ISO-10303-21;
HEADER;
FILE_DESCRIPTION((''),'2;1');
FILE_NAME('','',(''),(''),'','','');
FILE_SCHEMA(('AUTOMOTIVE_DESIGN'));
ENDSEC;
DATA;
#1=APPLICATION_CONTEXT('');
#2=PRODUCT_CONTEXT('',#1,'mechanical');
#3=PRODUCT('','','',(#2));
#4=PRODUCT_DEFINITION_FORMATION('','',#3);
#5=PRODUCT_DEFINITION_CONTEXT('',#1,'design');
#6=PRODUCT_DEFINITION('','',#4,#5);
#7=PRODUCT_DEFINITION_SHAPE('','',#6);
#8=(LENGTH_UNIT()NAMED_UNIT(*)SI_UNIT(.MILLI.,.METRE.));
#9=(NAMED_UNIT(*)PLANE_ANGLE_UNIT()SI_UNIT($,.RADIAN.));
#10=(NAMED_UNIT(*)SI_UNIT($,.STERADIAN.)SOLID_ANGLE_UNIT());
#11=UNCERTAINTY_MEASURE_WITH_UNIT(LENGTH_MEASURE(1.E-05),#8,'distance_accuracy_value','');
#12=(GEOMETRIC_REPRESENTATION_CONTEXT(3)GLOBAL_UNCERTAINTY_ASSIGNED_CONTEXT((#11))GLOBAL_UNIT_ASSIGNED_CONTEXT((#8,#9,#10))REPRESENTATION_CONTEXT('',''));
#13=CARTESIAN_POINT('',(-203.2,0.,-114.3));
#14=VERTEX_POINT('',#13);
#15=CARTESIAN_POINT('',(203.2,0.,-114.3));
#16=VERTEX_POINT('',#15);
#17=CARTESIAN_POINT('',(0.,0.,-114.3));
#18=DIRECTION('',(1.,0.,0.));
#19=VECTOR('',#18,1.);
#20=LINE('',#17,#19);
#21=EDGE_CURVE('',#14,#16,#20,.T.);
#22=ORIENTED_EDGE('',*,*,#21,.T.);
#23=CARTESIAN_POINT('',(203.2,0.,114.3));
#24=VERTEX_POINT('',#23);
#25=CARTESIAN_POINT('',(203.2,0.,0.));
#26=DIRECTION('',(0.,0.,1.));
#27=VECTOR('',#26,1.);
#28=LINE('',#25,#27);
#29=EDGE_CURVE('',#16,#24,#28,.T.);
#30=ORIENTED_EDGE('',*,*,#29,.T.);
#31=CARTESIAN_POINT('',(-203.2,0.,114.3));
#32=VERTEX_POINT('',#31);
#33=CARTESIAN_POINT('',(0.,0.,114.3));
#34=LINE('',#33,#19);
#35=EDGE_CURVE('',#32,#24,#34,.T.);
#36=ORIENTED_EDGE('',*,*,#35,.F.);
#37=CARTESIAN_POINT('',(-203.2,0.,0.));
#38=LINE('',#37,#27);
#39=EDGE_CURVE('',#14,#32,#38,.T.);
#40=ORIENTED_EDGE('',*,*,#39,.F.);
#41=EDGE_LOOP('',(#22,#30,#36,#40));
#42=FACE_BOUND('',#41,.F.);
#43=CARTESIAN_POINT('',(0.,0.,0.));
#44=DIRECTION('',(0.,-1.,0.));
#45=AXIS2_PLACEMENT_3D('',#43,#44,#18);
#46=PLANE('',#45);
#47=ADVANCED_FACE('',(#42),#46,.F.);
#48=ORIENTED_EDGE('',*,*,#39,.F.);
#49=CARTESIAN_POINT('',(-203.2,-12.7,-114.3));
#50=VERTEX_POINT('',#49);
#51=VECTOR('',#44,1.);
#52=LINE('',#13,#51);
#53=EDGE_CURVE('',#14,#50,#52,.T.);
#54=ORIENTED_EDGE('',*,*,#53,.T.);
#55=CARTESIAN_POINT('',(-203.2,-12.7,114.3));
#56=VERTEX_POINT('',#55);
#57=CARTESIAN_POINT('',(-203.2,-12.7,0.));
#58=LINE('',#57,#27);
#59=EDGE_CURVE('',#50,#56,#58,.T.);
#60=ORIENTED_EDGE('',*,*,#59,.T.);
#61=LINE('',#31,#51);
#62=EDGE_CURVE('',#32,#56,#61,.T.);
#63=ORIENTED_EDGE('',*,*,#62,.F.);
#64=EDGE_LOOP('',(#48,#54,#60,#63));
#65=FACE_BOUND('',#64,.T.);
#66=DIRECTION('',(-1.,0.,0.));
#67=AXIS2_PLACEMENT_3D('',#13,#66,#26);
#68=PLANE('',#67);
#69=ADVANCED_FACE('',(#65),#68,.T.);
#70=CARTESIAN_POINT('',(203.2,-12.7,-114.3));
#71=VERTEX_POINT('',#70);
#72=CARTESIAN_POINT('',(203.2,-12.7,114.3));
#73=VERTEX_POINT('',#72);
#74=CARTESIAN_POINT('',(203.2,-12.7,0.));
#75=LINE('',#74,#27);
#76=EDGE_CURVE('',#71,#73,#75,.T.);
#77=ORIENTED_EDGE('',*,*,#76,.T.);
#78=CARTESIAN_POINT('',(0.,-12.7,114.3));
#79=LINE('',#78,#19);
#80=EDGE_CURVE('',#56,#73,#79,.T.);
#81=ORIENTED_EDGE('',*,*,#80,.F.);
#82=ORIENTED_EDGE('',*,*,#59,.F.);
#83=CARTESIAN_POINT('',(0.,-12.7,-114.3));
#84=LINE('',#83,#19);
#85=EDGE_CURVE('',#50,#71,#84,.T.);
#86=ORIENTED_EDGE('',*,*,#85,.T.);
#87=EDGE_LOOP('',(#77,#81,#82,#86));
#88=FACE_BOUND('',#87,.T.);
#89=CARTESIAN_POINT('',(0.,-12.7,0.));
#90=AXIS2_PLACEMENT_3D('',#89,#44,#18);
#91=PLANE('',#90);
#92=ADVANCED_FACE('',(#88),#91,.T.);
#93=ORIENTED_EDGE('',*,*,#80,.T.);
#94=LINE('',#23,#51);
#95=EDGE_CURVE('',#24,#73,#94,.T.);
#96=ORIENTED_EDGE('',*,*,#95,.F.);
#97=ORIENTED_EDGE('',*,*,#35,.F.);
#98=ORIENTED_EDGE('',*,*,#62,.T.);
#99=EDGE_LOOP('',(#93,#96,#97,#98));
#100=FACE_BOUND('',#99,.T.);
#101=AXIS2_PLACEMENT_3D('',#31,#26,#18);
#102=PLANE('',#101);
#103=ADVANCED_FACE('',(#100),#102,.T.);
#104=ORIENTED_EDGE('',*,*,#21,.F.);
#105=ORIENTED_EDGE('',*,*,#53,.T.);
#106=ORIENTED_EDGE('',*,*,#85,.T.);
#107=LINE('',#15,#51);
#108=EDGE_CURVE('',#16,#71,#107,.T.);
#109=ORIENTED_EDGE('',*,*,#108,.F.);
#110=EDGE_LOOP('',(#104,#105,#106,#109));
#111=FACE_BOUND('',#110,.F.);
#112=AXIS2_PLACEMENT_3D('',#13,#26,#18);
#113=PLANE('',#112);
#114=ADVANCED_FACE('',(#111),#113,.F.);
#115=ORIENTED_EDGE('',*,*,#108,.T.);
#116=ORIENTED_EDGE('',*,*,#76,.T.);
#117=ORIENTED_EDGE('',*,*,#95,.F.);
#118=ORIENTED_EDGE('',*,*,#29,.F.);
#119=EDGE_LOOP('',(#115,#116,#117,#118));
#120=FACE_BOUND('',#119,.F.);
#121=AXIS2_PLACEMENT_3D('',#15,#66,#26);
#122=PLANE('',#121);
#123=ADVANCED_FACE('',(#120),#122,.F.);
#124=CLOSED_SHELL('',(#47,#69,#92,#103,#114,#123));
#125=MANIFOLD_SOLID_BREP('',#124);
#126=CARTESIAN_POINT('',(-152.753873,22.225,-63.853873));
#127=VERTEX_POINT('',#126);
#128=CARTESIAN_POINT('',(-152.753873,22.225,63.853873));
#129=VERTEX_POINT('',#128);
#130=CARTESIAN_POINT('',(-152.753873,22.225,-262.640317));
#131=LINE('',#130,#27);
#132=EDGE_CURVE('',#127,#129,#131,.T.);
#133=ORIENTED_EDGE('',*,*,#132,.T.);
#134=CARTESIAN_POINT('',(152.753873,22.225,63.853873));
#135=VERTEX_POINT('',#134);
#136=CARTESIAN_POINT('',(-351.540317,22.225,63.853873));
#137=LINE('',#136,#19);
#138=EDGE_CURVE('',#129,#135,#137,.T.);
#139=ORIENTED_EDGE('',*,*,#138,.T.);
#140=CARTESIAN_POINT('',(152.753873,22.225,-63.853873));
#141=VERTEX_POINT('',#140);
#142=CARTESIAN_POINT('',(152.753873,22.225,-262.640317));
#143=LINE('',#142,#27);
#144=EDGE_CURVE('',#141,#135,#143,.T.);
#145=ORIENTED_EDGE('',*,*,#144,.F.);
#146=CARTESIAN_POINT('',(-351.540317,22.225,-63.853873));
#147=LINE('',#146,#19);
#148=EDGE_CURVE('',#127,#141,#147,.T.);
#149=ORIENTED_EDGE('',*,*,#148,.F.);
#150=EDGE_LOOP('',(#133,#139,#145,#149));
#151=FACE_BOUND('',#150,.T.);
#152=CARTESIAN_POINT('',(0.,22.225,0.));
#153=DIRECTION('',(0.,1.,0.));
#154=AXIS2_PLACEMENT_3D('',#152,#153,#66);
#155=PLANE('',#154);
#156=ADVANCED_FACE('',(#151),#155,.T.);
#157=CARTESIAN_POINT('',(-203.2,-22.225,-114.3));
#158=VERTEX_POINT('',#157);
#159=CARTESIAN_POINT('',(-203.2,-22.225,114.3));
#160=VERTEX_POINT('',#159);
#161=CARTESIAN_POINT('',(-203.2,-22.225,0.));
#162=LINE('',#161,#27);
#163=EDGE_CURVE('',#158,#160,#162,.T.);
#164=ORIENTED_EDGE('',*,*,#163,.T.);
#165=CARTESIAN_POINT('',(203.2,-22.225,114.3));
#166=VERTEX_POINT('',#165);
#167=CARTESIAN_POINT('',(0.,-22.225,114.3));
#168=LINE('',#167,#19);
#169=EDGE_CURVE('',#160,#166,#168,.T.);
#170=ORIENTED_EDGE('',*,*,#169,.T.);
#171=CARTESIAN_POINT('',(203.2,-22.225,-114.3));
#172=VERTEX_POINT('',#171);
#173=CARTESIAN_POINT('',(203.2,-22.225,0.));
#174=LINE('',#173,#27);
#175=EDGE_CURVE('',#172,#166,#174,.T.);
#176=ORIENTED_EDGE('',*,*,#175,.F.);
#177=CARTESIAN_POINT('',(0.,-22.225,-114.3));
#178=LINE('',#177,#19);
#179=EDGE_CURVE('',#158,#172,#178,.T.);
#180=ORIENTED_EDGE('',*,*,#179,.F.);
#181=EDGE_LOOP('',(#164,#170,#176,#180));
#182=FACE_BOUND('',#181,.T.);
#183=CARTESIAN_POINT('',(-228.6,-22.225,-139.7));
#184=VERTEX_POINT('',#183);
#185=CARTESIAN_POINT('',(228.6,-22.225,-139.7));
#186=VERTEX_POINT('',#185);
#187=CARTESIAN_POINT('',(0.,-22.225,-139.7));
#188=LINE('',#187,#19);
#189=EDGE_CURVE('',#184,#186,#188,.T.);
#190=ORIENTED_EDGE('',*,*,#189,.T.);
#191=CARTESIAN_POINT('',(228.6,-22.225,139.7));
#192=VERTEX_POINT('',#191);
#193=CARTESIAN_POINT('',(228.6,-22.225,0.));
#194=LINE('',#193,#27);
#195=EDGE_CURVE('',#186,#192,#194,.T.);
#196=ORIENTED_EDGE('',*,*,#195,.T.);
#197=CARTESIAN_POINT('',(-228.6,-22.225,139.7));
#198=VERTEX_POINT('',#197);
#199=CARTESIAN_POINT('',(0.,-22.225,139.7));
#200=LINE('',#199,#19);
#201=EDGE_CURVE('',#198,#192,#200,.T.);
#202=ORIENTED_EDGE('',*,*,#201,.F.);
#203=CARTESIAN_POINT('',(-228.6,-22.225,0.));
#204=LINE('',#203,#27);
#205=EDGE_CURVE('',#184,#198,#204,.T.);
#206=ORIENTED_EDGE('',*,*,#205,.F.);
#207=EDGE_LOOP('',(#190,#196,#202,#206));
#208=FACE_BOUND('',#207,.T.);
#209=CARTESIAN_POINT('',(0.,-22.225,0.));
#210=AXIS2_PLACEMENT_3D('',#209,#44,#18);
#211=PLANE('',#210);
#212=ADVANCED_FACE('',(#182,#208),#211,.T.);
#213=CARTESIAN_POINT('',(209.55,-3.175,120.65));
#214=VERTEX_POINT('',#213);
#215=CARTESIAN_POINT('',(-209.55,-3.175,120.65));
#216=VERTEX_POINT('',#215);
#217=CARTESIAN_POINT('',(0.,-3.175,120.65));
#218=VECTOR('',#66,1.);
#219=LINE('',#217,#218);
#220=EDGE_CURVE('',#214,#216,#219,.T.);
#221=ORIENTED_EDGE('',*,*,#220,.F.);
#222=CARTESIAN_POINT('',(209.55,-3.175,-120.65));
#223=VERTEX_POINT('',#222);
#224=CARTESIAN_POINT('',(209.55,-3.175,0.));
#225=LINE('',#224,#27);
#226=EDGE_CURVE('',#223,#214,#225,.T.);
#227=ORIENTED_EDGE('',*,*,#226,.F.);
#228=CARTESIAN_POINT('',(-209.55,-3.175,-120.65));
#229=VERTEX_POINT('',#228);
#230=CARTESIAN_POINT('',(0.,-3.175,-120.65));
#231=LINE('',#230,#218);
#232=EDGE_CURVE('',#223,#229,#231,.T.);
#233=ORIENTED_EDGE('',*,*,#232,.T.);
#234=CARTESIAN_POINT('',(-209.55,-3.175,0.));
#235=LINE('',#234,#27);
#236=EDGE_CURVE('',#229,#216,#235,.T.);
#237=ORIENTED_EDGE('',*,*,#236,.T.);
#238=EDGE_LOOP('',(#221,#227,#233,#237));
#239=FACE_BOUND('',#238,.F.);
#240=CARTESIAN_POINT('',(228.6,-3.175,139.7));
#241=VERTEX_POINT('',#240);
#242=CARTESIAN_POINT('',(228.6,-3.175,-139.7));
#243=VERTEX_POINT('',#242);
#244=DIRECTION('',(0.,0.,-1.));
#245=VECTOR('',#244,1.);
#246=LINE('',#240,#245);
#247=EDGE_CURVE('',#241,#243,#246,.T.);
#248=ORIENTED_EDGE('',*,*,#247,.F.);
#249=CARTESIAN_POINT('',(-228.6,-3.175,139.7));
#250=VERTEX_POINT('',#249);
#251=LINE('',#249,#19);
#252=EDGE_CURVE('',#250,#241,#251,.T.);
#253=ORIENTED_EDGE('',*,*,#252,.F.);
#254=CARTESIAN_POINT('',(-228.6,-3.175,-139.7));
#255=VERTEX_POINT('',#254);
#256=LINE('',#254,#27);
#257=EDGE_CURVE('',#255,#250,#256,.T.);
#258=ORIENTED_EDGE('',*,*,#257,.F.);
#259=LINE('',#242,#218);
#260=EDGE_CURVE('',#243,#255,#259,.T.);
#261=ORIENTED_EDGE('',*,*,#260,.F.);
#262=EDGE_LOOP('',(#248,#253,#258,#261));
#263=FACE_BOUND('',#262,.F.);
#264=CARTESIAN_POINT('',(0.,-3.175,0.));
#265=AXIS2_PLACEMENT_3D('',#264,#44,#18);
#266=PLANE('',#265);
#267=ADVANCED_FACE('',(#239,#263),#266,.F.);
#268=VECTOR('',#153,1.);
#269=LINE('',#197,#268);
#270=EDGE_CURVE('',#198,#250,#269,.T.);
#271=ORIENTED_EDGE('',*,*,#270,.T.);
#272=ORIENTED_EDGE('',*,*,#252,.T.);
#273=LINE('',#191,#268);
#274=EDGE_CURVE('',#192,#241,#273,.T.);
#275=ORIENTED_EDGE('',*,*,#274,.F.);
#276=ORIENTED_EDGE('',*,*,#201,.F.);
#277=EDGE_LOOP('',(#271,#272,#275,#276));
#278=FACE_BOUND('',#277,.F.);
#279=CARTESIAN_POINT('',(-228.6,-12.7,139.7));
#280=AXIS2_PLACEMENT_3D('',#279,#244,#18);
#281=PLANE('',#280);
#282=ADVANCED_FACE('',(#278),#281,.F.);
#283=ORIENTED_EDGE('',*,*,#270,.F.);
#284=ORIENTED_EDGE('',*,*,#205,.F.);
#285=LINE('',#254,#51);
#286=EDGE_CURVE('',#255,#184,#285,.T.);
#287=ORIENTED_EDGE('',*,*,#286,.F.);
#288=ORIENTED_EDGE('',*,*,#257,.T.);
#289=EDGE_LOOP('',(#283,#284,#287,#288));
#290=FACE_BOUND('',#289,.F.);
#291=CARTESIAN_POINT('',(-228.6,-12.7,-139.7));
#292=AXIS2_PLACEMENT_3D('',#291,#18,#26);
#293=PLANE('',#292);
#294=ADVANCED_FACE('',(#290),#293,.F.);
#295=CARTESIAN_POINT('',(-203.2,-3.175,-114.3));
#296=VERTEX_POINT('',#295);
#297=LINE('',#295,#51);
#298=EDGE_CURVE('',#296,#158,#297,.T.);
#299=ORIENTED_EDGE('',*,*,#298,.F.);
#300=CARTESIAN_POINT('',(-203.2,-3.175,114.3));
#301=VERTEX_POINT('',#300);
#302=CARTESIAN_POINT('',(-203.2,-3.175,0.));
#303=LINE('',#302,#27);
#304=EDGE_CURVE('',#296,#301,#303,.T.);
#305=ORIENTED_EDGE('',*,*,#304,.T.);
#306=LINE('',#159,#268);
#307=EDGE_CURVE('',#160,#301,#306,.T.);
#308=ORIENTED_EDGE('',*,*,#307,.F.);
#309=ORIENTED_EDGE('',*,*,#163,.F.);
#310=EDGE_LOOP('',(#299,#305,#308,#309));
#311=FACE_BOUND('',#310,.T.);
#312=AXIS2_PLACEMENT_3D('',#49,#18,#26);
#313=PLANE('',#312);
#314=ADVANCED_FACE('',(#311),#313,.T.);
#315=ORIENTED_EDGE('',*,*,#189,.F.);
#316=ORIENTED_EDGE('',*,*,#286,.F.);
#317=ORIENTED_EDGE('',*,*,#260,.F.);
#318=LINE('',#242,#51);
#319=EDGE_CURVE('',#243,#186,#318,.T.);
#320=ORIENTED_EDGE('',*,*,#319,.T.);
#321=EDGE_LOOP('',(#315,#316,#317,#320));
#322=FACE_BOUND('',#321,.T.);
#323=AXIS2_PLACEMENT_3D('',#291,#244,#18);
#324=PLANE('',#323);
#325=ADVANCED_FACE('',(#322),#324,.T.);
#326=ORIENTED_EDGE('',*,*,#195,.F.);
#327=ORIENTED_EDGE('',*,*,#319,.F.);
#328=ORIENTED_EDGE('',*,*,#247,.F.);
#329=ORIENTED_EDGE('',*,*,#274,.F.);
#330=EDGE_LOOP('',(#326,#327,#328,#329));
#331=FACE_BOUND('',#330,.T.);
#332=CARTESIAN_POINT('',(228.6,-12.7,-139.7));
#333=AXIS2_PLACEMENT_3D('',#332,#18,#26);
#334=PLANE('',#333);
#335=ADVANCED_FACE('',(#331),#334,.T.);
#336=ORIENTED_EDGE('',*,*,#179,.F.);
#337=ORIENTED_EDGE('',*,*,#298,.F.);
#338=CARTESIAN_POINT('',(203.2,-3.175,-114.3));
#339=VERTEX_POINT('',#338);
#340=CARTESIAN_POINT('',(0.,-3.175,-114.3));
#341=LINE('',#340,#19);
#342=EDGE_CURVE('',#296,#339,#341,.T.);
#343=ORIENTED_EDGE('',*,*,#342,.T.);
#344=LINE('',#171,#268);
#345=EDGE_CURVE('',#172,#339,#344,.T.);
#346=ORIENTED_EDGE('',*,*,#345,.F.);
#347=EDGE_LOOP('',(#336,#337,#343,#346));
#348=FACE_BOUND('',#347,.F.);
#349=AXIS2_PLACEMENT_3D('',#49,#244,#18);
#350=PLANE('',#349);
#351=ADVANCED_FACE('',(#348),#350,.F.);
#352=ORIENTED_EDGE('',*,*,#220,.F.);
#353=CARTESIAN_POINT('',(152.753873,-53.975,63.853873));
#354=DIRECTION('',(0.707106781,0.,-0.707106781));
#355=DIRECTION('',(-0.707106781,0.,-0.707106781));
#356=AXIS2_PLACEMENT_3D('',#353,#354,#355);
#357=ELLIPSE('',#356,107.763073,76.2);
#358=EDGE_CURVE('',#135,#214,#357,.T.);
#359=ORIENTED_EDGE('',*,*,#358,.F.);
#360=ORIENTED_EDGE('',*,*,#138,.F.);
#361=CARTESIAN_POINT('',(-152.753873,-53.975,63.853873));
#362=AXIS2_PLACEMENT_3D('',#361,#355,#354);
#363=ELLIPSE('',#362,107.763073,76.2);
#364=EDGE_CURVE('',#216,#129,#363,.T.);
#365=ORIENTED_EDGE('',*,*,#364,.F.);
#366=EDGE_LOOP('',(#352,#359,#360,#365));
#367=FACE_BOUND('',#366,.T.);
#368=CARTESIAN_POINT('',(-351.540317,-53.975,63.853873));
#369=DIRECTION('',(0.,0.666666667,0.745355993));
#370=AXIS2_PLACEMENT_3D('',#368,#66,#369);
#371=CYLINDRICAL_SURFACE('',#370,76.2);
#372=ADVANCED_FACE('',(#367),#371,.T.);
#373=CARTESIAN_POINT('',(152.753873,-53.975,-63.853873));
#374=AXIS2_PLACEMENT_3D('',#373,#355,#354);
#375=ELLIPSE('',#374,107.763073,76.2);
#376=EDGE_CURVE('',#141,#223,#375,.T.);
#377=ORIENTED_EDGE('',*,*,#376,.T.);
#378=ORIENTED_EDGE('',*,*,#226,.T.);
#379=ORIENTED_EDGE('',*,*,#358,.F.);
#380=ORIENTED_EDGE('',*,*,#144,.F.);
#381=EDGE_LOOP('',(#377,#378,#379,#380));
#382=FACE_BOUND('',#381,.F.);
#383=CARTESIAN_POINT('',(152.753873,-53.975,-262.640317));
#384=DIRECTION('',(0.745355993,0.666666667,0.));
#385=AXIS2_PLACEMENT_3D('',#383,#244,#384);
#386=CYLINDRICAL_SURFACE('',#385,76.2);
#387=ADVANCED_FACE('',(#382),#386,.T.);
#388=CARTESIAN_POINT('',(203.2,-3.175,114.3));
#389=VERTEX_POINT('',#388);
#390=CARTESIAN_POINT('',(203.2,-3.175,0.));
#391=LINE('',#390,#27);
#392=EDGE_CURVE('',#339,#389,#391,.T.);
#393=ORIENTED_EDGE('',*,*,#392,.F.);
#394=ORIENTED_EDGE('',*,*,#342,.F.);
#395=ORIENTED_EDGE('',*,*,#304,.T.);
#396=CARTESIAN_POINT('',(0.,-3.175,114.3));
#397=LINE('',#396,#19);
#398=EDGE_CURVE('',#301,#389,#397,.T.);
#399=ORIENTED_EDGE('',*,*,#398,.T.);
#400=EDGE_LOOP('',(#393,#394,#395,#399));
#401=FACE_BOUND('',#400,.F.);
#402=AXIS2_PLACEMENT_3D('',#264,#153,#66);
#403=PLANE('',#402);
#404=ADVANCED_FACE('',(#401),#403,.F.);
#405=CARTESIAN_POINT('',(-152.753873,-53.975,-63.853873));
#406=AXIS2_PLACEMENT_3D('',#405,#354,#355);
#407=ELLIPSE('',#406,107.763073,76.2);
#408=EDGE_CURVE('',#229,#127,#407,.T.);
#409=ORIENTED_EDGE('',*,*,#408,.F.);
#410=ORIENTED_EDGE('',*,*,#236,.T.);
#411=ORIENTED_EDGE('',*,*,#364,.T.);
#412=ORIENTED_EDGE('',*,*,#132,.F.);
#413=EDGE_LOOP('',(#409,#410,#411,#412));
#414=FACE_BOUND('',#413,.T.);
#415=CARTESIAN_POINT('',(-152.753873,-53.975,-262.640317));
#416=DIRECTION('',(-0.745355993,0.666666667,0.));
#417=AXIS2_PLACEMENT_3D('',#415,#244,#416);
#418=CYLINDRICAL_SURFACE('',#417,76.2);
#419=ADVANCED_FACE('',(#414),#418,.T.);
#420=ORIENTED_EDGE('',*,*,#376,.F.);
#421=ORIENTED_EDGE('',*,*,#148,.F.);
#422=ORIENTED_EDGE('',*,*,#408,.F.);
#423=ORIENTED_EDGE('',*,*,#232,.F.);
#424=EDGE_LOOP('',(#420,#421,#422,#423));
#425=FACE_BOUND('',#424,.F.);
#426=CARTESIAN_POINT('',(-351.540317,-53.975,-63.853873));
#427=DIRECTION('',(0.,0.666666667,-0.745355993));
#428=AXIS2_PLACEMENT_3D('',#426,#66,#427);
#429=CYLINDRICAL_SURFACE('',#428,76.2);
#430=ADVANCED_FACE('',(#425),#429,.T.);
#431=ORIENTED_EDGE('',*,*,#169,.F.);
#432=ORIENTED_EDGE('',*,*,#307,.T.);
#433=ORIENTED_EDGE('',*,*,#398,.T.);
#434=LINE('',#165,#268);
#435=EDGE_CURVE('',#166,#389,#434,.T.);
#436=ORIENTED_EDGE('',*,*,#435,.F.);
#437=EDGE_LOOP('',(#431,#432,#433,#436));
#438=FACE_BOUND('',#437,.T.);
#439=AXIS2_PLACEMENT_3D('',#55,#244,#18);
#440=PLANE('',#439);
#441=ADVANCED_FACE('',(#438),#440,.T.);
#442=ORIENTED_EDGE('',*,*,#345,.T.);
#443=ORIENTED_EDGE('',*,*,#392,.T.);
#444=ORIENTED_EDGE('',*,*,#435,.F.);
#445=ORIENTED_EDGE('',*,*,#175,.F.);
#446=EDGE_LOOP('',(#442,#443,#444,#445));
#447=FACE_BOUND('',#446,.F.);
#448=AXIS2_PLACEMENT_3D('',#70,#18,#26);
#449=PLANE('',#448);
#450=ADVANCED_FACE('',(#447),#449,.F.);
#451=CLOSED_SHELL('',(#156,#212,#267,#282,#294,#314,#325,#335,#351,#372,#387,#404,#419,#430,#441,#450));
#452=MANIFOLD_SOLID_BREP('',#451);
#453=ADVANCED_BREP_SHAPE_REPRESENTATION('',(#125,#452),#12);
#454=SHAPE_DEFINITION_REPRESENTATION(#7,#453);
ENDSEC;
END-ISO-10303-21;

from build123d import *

# Parameters (mm, degrees)
F0_W        = 406.4
F0_H        = 228.6
F1_DEPTH    = 12.7
F2_W        = 457.2
F2_H        = 279.4
F2_W_2      = 406.4
F2_H_2      = 228.6
F3_DEPTH    = 9.525
F4_W        = 419.1
F4_H        = 241.3
F5_DEPTH    = 25.4
F6_T1_DEPTH = 525.2806331425
F6_T3_DEPTH = 703.0806331425


# Not quite as in the source:
# - a fillet or chamfer that OpenCascade refuses, or shapes differently, is made with other operations: its cross-section is extruded or revolved along the edge and cut away or added


with BuildPart() as f1:
    # F0 (on Front) → F1 (new body)
    with BuildSketch(Plane.XZ):
        Rectangle(F0_W, F0_H)
    extrude(amount=F1_DEPTH)


with BuildPart() as f3:
    # F2 (on face) → F3 (new body, symmetric)
    with BuildSketch(Plane.XZ.offset(12.7)):
        Rectangle(F2_W, F2_H)
        Rectangle(F2_W_2, F2_H_2, mode=Mode.SUBTRACT)
    extrude(amount=F3_DEPTH, both=True)

    # F4 (on face) → F5 (join)
    with BuildSketch(Plane(origin=(0, -3.175, 0), x_dir=(-1, 0, 0), z_dir=(0, 1, 0))):
        Rectangle(F4_W, F4_H)
    extrude(amount=F5_DEPTH)

    # F6: fillet of radius 76.2 on 4 edges, made by hand

    # F6_s2 → F6_t1 (cut)
    with BuildSketch(Plane.XY.offset(-262.6403165712)):
        with BuildLine():
            ThreePointArc((209.55, -3.175), (183.8623931049, 15.5857648032), (152.7538733715, 22.225))
            Line((152.7538733715, 22.225), (209.55, 22.225))
            Line((209.55, 22.225), (209.55, -3.175))
        make_face()
        with BuildLine():
            ThreePointArc((-209.55, -3.175), (-183.8623931049, 15.5857648032), (-152.7538733715, 22.225))
            Line((-152.7538733715, 22.225), (-209.55, 22.225))
            Line((-209.55, 22.225), (-209.55, -3.175))
        make_face()
    extrude(amount=F6_T1_DEPTH, mode=Mode.SUBTRACT)

    # F6_s4 → F6_t3 (cut)
    with BuildSketch(Plane.YZ.offset(-351.5403165712)):
        with BuildLine():
            ThreePointArc((-3.175, 120.65), (15.5857648032, 94.9623931049), (22.225, 63.8538733715))
            Line((22.225, 63.8538733715), (22.225, 120.65))
            Line((22.225, 120.65), (-3.175, 120.65))
        make_face()
        with BuildLine():
            ThreePointArc((-3.175, -120.65), (15.5857648032, -94.9623931049), (22.225, -63.8538733715))
            Line((22.225, -63.8538733715), (22.225, -120.65))
            Line((22.225, -120.65), (-3.175, -120.65))
        make_face()
    extrude(amount=F6_T3_DEPTH, mode=Mode.SUBTRACT)


solid = Compound([f1.part, f3.part])
